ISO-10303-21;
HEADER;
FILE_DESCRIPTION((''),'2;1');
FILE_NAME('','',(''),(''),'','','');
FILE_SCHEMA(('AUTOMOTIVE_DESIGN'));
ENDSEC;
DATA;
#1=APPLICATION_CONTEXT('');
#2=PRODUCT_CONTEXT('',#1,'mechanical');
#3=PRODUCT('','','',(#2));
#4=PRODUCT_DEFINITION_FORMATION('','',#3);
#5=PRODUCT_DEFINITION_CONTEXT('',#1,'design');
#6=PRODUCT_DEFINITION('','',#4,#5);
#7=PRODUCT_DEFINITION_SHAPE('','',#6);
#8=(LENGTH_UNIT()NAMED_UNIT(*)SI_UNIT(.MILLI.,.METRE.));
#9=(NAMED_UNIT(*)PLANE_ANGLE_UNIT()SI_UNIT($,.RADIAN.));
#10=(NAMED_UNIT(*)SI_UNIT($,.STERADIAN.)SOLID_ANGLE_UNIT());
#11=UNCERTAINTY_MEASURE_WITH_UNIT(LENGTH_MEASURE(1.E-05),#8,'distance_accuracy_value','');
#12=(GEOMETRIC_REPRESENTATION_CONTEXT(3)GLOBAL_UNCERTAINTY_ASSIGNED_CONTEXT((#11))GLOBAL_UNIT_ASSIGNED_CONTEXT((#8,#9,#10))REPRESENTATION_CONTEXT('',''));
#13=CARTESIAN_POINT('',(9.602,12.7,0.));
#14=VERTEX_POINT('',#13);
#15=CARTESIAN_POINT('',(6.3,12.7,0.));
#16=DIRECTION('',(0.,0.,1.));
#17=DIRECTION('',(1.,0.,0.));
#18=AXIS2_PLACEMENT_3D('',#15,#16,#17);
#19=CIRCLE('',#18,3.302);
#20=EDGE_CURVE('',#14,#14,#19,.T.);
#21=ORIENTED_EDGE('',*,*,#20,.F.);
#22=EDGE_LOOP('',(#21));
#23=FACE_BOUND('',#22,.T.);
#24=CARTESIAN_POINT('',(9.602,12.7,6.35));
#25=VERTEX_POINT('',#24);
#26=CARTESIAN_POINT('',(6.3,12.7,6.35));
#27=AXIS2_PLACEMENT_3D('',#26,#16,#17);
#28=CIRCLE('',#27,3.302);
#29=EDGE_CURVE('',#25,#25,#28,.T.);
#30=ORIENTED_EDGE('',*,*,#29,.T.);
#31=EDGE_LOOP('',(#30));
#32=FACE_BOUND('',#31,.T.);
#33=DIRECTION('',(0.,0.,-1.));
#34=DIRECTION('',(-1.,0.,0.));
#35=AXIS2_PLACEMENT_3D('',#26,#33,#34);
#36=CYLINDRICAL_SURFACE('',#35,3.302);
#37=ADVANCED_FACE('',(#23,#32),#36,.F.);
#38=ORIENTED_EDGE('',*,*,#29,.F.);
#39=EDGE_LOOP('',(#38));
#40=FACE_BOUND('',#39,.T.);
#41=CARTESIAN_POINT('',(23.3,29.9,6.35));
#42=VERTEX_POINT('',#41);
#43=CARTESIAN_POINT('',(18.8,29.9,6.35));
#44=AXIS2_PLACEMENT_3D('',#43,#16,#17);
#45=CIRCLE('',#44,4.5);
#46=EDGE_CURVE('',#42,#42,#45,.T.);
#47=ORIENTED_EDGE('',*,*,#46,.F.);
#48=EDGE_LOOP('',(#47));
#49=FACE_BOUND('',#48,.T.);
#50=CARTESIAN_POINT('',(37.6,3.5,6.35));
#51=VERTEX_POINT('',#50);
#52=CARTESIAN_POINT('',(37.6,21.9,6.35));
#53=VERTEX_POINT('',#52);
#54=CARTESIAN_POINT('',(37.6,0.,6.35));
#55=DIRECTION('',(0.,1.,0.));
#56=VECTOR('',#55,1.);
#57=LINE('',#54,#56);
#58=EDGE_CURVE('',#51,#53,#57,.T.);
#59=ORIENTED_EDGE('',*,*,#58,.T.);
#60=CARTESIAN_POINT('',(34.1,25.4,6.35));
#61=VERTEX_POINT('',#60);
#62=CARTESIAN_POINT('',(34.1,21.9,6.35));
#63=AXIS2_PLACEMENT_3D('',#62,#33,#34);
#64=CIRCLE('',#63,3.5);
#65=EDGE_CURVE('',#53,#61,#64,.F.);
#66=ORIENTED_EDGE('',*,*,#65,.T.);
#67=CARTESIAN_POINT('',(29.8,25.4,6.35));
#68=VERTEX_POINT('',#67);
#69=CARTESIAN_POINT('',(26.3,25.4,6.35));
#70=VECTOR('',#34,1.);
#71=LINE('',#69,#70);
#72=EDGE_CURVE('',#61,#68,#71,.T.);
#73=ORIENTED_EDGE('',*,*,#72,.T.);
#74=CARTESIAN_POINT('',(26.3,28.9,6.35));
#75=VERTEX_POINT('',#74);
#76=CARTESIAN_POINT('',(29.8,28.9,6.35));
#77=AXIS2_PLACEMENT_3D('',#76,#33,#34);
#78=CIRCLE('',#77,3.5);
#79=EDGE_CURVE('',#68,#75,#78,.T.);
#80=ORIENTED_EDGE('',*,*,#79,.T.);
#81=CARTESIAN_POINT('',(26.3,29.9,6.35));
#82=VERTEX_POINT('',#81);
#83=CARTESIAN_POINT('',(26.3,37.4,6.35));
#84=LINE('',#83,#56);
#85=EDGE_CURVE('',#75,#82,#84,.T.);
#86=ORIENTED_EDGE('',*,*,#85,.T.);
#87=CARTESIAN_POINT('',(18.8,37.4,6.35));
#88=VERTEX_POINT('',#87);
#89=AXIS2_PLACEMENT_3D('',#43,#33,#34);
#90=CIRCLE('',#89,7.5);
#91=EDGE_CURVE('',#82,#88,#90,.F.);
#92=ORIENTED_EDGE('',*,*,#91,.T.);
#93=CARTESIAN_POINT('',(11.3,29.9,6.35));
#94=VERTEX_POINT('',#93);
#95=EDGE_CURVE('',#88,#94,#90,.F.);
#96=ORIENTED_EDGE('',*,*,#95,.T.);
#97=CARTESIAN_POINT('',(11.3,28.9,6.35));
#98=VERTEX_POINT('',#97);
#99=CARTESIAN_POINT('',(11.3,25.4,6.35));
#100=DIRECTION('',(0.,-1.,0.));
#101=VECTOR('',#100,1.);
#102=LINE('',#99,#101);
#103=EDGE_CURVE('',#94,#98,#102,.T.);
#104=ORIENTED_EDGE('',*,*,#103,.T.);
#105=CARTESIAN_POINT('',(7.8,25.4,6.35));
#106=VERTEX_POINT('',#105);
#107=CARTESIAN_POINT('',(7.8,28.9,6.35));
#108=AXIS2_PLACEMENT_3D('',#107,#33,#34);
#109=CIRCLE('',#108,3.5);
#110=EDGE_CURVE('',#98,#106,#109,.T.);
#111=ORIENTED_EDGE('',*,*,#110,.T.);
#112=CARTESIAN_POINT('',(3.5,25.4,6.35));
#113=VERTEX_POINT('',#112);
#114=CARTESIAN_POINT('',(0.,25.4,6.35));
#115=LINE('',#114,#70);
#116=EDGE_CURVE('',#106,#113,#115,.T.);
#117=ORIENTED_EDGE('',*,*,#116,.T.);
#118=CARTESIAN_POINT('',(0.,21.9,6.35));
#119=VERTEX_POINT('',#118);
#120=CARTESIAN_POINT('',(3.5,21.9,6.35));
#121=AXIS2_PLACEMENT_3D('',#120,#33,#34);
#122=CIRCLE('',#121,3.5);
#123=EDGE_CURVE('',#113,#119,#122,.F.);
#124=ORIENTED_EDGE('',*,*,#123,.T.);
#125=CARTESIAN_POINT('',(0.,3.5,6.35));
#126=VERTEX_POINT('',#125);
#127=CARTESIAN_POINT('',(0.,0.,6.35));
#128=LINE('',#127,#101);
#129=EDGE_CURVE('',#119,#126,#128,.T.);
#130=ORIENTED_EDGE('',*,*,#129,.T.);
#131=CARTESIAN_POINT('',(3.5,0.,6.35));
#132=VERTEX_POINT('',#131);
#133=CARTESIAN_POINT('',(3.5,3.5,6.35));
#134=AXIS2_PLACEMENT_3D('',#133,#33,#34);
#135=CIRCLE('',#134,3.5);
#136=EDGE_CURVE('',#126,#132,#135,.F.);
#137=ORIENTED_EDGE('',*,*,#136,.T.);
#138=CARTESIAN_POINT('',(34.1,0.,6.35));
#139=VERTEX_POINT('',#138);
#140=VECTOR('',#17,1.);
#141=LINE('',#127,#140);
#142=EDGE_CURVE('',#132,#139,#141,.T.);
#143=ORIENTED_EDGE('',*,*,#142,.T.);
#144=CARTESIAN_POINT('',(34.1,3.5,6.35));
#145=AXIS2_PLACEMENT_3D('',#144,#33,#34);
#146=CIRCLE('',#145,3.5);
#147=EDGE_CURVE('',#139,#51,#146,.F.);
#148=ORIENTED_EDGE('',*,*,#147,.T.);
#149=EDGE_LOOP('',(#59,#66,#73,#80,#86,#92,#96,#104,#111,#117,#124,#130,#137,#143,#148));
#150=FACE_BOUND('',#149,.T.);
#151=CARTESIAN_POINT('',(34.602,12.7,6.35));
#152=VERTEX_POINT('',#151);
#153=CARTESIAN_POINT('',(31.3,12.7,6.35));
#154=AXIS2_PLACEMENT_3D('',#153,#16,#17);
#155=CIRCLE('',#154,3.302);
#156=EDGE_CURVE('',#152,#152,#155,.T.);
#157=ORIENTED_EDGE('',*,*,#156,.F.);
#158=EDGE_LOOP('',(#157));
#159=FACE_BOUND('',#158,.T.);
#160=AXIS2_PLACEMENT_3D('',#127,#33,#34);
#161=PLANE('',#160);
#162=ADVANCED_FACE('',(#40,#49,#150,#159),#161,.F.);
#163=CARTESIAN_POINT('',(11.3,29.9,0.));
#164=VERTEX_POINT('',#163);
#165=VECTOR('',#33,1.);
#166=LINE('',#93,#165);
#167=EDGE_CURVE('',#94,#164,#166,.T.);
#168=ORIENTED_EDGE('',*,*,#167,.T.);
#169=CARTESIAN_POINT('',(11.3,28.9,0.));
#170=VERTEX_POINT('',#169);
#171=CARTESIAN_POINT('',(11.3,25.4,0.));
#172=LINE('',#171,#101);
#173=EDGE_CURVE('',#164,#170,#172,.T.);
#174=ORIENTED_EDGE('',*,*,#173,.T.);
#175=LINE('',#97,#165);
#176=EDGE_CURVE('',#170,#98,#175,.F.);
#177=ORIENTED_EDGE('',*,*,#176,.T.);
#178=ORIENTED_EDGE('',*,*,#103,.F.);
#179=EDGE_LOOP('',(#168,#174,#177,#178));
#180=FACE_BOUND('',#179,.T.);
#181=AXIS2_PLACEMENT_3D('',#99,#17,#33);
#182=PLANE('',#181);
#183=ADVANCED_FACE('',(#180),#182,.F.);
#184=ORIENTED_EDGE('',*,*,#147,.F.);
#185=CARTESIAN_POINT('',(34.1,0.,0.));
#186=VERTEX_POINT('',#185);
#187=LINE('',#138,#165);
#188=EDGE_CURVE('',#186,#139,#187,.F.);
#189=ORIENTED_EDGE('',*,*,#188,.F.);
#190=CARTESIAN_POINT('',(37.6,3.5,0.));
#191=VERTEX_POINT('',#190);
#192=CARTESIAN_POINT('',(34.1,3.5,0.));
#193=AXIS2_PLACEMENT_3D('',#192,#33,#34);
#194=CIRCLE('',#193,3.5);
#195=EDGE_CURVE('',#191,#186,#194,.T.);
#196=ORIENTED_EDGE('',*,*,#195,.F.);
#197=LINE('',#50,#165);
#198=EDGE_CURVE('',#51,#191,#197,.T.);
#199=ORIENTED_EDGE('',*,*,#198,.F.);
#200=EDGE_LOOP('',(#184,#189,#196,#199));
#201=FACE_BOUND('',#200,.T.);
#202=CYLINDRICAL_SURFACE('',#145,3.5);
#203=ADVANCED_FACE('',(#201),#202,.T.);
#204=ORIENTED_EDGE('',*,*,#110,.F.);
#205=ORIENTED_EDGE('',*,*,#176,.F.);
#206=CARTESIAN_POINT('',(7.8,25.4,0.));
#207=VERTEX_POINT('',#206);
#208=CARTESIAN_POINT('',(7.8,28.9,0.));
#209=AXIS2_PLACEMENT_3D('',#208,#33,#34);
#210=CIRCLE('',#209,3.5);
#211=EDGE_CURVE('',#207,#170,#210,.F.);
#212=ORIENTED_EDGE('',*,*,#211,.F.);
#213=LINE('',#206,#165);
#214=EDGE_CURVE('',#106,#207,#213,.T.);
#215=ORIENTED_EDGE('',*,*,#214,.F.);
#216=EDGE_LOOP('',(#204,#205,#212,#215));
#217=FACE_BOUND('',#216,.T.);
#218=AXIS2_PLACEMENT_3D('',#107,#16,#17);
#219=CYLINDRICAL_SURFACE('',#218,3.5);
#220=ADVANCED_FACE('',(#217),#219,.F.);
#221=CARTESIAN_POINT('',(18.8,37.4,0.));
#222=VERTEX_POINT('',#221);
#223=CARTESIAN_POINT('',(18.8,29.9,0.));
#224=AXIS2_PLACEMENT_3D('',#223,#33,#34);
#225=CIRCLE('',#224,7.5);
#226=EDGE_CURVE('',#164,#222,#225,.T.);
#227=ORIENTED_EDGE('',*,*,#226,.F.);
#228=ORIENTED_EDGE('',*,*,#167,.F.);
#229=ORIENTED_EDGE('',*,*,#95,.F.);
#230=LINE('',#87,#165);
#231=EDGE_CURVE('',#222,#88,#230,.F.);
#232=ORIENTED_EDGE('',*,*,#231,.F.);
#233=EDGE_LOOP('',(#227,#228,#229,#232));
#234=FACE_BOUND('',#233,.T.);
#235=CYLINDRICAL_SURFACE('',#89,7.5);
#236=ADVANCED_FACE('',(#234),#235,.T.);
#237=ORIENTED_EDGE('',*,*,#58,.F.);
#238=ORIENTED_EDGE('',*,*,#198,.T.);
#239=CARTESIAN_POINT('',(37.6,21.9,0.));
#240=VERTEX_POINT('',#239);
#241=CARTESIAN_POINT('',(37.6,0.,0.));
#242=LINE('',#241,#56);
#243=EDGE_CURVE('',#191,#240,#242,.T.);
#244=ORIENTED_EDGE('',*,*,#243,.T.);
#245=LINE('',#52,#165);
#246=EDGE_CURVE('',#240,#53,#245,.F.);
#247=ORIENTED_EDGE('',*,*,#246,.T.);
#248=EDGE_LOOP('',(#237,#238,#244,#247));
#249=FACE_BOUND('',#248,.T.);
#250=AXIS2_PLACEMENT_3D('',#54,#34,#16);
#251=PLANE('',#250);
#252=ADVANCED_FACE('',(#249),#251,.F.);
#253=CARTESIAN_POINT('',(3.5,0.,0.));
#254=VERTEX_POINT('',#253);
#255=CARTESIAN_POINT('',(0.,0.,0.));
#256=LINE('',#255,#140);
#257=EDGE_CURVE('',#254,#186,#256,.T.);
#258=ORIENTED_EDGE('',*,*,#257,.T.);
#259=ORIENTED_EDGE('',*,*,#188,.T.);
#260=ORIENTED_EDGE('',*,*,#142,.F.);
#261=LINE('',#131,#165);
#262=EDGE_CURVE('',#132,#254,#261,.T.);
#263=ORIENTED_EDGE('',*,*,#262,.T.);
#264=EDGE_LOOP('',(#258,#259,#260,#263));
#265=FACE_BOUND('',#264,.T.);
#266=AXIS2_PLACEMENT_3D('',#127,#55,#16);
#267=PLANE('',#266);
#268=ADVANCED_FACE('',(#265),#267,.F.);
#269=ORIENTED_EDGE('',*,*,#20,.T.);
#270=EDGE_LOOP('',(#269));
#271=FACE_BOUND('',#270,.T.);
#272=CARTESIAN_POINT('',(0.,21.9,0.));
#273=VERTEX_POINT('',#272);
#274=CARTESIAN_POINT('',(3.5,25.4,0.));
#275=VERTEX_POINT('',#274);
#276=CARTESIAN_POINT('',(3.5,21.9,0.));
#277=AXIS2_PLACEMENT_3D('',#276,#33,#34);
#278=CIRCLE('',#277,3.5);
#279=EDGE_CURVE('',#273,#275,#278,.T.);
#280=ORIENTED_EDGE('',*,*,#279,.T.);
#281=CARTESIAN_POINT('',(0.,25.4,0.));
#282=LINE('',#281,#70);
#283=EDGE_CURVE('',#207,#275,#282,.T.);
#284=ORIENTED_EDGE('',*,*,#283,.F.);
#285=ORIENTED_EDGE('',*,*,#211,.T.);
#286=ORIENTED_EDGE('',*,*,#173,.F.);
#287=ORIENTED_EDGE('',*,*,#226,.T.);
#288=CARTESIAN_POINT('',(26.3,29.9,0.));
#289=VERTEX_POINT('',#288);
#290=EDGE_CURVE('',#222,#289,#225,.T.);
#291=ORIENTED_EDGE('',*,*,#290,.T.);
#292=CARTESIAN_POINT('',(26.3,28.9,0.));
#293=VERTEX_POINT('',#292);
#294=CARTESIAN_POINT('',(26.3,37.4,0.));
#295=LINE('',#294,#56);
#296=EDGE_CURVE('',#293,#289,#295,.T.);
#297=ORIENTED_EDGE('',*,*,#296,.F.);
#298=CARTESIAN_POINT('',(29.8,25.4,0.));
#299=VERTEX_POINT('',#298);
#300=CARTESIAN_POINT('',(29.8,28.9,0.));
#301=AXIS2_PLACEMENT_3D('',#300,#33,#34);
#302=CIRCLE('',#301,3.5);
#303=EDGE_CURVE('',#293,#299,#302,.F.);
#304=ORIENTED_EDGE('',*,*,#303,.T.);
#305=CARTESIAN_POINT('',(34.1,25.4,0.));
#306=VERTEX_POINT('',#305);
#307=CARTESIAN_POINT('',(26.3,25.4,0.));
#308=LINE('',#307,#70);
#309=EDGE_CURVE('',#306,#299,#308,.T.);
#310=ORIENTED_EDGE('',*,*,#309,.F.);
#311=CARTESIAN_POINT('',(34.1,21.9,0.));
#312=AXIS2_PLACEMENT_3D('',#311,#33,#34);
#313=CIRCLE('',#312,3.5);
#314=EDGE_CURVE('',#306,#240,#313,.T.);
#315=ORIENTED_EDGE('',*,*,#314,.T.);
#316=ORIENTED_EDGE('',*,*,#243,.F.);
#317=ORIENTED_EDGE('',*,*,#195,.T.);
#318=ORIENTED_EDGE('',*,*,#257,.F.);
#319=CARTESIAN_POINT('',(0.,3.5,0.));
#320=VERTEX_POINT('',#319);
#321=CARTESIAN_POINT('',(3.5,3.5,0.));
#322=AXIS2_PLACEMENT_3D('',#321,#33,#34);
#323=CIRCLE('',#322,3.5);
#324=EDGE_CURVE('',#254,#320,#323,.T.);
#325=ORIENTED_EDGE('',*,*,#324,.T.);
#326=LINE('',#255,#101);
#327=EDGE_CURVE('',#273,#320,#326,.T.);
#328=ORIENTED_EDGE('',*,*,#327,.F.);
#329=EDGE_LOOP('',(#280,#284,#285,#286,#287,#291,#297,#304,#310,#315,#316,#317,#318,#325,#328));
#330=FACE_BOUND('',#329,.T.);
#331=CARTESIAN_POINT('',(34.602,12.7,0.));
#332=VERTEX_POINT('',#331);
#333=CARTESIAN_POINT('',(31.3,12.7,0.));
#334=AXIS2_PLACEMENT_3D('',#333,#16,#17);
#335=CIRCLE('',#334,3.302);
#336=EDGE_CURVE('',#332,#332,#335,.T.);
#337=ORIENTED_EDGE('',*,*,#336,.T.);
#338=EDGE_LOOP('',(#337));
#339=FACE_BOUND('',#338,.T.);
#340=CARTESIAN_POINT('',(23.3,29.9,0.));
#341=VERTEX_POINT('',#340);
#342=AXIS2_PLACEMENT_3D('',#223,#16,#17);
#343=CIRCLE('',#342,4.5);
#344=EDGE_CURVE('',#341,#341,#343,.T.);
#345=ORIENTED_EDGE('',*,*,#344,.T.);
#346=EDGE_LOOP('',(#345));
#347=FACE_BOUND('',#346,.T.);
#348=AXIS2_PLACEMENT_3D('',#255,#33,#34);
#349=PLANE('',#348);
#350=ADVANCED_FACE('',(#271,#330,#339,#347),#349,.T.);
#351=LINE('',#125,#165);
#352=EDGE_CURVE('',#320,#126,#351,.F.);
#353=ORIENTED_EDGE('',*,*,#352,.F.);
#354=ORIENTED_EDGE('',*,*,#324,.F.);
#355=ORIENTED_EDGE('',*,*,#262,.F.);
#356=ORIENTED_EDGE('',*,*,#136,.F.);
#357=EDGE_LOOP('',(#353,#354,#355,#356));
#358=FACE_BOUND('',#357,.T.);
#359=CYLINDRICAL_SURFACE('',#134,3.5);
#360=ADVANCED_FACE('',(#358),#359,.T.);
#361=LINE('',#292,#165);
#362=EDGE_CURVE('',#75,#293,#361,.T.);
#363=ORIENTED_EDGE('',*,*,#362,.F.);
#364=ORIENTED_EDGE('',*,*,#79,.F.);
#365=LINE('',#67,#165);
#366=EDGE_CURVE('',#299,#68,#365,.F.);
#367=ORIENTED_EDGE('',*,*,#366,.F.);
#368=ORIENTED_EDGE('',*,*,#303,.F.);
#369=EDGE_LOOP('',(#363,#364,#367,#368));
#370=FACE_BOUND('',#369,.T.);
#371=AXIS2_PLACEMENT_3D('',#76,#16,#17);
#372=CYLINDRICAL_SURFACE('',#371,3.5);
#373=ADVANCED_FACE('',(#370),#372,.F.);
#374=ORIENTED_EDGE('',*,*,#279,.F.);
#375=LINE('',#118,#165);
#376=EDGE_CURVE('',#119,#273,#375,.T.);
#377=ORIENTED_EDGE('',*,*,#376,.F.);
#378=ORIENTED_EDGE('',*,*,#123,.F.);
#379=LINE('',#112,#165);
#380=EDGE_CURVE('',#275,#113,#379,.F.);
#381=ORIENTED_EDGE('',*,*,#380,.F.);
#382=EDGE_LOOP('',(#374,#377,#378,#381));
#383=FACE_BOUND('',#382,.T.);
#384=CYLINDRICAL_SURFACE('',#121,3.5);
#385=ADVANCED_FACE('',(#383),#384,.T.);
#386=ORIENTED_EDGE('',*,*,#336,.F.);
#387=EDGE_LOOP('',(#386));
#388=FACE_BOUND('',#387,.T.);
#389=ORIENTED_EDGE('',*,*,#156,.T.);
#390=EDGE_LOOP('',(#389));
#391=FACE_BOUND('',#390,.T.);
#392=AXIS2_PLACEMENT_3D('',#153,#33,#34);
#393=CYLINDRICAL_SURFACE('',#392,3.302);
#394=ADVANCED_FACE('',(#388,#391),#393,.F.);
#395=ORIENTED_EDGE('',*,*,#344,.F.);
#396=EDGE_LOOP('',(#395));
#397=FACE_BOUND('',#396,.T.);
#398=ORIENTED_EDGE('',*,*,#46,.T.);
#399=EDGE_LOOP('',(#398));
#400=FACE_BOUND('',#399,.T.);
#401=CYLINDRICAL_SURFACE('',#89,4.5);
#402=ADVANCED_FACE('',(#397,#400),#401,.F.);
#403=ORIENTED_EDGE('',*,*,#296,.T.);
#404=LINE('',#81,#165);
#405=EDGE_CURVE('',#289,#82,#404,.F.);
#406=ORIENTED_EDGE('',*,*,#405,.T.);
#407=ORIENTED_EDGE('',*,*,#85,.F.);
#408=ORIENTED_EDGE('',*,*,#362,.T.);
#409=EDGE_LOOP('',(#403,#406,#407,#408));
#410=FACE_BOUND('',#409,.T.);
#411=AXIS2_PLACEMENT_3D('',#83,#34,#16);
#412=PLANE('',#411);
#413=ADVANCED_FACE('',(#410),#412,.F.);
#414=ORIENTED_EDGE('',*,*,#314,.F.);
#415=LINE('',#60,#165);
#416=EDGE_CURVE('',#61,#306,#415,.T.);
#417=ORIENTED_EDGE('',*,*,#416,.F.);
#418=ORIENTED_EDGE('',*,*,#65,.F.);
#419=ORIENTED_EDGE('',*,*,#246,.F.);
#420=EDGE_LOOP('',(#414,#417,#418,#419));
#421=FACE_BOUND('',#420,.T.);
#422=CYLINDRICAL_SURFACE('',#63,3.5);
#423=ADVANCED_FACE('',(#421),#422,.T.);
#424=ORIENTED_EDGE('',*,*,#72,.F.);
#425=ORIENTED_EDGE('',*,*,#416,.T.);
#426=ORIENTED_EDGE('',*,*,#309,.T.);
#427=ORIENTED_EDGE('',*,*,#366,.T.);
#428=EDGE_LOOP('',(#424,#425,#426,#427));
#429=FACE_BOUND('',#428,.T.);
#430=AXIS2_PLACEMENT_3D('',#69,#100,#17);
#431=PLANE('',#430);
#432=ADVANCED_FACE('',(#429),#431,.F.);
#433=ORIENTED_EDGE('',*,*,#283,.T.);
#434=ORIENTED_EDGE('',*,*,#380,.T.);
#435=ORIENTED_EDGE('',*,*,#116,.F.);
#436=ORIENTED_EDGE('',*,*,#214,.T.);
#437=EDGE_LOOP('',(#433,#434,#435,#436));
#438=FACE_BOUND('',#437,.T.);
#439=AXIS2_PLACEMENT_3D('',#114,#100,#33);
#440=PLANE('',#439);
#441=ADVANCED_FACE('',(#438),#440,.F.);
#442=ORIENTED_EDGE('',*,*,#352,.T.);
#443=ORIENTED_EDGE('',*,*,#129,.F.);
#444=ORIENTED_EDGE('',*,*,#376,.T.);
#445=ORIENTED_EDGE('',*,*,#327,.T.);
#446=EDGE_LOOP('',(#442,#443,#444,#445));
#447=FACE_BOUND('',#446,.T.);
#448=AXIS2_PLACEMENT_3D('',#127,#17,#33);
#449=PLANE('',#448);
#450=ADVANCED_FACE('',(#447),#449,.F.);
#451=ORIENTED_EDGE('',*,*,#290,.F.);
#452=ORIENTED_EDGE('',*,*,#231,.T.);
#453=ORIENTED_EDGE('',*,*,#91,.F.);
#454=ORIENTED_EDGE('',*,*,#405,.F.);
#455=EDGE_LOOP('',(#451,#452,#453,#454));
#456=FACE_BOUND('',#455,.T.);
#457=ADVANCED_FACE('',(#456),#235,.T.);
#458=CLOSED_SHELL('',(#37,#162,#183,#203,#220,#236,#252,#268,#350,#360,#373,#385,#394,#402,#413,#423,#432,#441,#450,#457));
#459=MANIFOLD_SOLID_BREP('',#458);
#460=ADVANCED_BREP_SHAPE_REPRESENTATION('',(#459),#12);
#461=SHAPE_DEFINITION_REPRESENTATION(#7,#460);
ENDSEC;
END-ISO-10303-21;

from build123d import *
from OCP.BRepFilletAPI import BRepFilletAPI_MakeFillet

# Parameters (mm, degrees)
SKETCH1_R           = 4.5
SKETCH1_R_2         = 3.302
BOSS_EXTRUDE1_DEPTH = 6.35
FILLET2_R           = 7.5
FILLET2_R_2         = 3.5


with BuildPart() as part:
    # Sketch1 → Boss-Extrude1 (new body)
    with BuildSketch(Plane.XY):
        Polygon((0, 0), (37.6, 0), (37.6, 25.4), (26.3, 25.4), (26.3, 37.4), (11.3, 37.4), (11.3, 25.4), (0, 25.4), align=None)
        with Locations((18.8, 29.9)):
            Circle(SKETCH1_R, mode=Mode.SUBTRACT)
        with Locations((6.3, 12.7)):
            Circle(SKETCH1_R_2, mode=Mode.SUBTRACT)
        with Locations((31.3, 12.7)):
            Circle(SKETCH1_R_2, mode=Mode.SUBTRACT)
    extrude(amount=BOSS_EXTRUDE1_DEPTH)

    # Fillet2
    fillet2_edges_1 = [part.edges().sort_by_distance(p)[0] for p in [
        (11.3, 37.4, 3.175),
        (26.3, 37.4, 3.175),
    ]]
    fillet2_edges_2 = [part.edges().sort_by_distance(p)[0] for p in [
        (11.3, 25.4, 3.175),
        (0, 25.4, 3.175),
        (0, 0, 3.175),
        (37.6, 25.4, 3.175),
        (26.3, 25.4, 3.175),
        (37.6, 0, 3.175),
    ]]
    fillet2 = BRepFilletAPI_MakeFillet(part.part.solid().wrapped)
    for e in fillet2_edges_1:
        fillet2.Add(FILLET2_R - 0.0001, e.wrapped)
    for e in fillet2_edges_2:
        fillet2.Add(FILLET2_R_2 - 0.0001, e.wrapped)
    add(Compound.cast(fillet2.Shape()), mode=Mode.REPLACE)  # a hair under: the kernel refuses the full size


solid = part.part
